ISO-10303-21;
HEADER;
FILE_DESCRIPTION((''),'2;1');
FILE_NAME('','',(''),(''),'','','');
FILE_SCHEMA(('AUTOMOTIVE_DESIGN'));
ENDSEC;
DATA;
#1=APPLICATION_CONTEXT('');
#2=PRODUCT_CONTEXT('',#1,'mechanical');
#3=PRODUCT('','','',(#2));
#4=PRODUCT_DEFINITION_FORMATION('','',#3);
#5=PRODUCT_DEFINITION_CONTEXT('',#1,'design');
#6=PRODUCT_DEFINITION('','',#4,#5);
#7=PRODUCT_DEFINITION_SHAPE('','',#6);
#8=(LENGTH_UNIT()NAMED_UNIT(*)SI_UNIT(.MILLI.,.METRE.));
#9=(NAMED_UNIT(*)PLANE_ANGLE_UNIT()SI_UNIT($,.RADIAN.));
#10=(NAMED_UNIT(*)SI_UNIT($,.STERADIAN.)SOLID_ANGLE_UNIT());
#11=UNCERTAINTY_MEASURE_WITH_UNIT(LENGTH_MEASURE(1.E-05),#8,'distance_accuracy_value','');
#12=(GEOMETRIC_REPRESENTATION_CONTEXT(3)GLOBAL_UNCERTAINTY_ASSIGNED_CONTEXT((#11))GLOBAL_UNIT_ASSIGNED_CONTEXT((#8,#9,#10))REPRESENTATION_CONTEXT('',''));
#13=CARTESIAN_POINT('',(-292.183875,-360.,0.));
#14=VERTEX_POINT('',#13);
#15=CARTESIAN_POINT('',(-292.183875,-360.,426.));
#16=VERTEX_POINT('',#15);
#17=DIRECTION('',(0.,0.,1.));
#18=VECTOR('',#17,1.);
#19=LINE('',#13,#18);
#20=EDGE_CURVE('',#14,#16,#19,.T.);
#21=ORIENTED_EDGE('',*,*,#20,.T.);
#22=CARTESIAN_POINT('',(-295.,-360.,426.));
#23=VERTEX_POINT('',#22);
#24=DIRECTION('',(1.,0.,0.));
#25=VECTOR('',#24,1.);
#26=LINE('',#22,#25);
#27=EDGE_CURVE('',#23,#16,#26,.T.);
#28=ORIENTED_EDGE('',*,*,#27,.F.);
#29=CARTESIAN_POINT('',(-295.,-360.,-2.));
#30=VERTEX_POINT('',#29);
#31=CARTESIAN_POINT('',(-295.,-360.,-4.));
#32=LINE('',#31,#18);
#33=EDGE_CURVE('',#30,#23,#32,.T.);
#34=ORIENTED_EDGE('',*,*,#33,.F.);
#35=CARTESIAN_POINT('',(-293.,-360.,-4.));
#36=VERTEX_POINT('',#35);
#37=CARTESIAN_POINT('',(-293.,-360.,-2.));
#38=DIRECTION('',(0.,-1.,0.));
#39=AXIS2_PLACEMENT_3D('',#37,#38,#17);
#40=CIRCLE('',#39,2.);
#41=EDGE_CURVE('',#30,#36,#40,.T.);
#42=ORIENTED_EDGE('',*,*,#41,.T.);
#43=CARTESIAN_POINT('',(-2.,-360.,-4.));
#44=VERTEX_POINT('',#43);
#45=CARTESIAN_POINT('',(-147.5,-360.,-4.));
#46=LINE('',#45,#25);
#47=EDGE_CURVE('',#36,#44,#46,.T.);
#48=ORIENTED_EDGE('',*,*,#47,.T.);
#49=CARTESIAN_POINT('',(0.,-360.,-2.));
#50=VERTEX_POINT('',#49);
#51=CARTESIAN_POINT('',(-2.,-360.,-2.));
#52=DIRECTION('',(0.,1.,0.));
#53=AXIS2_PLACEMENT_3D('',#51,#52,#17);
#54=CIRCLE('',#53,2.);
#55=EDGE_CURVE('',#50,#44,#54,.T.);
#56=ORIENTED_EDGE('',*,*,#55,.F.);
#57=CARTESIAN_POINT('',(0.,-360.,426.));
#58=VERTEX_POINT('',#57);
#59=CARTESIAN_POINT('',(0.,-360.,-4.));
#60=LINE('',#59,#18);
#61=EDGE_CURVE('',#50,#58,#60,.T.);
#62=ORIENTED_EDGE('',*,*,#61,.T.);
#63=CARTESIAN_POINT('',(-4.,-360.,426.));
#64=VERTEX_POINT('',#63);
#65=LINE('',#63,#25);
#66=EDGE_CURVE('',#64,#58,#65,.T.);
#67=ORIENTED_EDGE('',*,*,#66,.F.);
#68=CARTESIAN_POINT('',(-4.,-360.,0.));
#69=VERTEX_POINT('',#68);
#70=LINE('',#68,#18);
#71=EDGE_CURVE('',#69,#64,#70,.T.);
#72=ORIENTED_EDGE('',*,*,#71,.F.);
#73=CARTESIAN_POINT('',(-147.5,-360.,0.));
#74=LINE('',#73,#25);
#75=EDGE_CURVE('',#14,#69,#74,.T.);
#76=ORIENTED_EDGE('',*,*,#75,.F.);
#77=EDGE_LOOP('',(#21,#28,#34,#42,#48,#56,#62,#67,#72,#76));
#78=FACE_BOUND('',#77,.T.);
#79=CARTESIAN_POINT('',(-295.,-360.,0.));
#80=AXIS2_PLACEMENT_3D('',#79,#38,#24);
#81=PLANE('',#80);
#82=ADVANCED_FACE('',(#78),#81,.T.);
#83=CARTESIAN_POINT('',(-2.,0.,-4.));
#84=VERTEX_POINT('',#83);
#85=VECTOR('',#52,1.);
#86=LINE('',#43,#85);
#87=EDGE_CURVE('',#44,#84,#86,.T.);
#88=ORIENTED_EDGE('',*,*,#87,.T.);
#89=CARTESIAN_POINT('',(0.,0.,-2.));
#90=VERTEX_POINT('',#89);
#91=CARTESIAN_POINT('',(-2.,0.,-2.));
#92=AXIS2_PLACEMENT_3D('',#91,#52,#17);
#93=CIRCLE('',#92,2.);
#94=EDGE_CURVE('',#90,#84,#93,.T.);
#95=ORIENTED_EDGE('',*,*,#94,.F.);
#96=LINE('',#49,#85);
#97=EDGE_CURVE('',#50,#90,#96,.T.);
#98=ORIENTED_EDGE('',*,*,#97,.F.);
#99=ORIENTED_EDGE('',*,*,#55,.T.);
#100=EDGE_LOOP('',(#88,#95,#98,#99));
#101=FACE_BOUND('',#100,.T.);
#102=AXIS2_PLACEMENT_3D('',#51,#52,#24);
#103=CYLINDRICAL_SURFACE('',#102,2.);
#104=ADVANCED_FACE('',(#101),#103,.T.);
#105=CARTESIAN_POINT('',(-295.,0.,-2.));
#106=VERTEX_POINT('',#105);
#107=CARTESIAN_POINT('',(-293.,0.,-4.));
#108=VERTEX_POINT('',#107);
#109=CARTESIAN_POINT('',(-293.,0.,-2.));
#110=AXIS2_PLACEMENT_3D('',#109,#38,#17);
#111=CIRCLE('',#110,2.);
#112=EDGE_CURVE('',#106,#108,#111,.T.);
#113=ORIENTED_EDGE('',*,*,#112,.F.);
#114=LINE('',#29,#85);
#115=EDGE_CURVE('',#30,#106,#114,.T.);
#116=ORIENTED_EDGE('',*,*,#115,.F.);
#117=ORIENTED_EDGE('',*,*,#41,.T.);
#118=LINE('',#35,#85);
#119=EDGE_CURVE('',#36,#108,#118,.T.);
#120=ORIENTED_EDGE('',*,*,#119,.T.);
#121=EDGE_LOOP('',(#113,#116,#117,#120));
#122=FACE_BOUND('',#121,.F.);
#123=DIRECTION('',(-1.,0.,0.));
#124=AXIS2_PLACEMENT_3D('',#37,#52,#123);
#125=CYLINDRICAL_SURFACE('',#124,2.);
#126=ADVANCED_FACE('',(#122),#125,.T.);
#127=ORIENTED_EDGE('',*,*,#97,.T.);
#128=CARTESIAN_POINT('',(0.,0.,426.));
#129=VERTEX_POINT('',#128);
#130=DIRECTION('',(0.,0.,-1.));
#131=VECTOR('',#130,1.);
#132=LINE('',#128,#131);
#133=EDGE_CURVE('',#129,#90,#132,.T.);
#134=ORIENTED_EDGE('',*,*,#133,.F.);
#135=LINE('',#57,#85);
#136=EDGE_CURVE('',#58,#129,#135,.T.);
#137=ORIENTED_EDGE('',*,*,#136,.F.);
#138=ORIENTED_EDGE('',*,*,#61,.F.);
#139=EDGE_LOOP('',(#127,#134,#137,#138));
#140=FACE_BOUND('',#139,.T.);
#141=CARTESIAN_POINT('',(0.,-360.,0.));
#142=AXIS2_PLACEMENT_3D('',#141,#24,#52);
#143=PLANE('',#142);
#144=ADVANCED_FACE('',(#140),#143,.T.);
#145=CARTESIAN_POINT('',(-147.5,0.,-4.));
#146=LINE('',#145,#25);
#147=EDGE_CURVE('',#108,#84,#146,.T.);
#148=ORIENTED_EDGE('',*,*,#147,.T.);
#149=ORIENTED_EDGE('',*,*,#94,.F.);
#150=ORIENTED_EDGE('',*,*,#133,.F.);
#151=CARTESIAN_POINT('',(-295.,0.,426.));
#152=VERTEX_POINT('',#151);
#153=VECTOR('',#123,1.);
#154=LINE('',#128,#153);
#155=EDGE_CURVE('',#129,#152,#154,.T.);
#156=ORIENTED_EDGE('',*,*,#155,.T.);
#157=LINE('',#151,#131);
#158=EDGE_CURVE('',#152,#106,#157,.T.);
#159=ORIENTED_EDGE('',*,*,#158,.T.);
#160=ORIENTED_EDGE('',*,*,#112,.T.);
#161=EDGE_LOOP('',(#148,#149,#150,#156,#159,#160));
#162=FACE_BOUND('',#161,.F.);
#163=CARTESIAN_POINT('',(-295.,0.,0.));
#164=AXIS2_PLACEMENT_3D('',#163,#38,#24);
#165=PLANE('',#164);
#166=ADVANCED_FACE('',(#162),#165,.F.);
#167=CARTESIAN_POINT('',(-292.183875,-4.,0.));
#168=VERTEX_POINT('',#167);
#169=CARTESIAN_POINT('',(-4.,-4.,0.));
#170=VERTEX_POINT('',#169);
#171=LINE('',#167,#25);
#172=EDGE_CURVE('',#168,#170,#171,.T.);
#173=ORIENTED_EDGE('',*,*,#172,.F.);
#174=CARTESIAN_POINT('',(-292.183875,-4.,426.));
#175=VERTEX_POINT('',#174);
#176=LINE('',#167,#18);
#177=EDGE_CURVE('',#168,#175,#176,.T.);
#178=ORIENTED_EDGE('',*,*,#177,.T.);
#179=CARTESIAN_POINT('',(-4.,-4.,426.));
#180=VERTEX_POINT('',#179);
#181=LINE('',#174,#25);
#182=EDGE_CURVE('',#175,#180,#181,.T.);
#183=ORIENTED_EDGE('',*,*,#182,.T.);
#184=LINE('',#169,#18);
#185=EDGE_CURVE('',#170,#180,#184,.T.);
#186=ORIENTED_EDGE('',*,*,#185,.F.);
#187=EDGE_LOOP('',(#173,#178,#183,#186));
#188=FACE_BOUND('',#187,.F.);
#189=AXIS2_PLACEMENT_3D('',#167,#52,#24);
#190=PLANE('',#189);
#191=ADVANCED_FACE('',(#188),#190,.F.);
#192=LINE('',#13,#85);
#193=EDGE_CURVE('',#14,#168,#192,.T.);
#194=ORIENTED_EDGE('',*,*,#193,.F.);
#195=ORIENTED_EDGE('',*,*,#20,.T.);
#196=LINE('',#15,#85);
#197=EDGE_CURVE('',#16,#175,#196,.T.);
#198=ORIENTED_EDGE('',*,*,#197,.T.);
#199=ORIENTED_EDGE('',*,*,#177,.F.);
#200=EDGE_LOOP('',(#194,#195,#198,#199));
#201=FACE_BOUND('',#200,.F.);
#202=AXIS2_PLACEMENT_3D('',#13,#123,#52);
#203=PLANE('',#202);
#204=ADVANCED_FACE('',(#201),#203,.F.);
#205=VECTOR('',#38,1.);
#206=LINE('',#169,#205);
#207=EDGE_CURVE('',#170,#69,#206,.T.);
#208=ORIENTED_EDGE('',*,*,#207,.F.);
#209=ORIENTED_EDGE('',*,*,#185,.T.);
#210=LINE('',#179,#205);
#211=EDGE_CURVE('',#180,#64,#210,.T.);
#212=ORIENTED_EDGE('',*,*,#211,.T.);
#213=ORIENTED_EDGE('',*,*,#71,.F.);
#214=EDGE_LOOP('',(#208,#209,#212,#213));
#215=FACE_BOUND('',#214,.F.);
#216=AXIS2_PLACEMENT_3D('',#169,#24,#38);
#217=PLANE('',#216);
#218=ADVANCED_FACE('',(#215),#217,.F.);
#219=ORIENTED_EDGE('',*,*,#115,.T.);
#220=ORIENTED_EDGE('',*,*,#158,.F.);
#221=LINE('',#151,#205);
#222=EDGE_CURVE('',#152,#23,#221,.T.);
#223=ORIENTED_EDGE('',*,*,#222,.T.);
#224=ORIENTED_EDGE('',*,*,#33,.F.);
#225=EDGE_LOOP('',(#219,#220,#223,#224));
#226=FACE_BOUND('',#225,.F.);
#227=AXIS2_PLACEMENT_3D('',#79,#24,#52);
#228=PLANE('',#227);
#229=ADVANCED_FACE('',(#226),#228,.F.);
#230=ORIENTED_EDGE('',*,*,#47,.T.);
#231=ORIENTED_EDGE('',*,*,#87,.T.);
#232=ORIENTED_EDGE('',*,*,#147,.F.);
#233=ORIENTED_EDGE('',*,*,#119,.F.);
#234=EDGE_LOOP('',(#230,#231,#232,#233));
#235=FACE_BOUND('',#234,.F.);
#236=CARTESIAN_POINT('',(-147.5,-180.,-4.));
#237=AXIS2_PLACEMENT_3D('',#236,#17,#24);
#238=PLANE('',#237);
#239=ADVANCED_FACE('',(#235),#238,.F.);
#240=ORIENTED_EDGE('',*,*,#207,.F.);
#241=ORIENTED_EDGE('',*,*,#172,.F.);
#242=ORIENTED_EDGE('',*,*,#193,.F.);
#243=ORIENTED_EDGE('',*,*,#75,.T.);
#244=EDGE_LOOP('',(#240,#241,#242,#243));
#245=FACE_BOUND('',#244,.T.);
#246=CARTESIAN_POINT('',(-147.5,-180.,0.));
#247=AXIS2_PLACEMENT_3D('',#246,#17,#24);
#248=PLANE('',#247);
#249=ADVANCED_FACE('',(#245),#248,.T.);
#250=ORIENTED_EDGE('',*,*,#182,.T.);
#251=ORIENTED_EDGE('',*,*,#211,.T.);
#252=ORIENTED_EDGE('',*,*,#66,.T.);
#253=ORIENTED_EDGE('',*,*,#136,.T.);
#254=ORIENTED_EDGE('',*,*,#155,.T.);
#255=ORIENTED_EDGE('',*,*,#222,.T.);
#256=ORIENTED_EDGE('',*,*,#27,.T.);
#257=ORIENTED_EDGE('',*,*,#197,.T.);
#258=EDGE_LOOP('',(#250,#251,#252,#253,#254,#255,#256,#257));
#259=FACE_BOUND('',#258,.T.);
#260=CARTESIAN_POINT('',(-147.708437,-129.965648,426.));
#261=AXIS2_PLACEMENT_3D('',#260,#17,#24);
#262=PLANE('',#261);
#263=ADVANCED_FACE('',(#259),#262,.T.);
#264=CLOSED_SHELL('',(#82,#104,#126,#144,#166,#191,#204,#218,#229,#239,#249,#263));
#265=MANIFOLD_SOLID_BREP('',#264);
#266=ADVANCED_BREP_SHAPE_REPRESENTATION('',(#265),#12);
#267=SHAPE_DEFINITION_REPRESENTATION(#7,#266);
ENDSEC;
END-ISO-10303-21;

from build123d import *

# Parameters (mm, degrees)
F1_DEPTH = 426
F2_W     = 295
F2_H     = 360
F3_DEPTH = 4
F4_R     = 2


# Not quite as in the source:
# - a feature names something its author has since deleted; it is built from what else it names


with BuildPart() as f1:
    # F0 (on Top) → F1 (new body)
    with BuildSketch(Plane.XY):
        Polygon((-4, -360), (0, -360), (0, 0), (-295, 0), (-295, -360), (-292.1838745495, -360), (-292.1838745495, -4), (-4, -4), align=None)
    extrude(amount=F1_DEPTH)

    # F2 (on Top) → F3 (join)
    with BuildSketch(Plane.XY):
        with Locations((-147.5, -180)):
            Rectangle(F2_W, F2_H)
    extrude(amount=-F3_DEPTH)

    # F4
    f4_edges = [f1.edges().sort_by_distance(p)[0] for p in [
        (-295, -180, -4),
        (0, -180, -4),
    ]]
    fillet(f4_edges, radius=F4_R)


solid = f1.part
